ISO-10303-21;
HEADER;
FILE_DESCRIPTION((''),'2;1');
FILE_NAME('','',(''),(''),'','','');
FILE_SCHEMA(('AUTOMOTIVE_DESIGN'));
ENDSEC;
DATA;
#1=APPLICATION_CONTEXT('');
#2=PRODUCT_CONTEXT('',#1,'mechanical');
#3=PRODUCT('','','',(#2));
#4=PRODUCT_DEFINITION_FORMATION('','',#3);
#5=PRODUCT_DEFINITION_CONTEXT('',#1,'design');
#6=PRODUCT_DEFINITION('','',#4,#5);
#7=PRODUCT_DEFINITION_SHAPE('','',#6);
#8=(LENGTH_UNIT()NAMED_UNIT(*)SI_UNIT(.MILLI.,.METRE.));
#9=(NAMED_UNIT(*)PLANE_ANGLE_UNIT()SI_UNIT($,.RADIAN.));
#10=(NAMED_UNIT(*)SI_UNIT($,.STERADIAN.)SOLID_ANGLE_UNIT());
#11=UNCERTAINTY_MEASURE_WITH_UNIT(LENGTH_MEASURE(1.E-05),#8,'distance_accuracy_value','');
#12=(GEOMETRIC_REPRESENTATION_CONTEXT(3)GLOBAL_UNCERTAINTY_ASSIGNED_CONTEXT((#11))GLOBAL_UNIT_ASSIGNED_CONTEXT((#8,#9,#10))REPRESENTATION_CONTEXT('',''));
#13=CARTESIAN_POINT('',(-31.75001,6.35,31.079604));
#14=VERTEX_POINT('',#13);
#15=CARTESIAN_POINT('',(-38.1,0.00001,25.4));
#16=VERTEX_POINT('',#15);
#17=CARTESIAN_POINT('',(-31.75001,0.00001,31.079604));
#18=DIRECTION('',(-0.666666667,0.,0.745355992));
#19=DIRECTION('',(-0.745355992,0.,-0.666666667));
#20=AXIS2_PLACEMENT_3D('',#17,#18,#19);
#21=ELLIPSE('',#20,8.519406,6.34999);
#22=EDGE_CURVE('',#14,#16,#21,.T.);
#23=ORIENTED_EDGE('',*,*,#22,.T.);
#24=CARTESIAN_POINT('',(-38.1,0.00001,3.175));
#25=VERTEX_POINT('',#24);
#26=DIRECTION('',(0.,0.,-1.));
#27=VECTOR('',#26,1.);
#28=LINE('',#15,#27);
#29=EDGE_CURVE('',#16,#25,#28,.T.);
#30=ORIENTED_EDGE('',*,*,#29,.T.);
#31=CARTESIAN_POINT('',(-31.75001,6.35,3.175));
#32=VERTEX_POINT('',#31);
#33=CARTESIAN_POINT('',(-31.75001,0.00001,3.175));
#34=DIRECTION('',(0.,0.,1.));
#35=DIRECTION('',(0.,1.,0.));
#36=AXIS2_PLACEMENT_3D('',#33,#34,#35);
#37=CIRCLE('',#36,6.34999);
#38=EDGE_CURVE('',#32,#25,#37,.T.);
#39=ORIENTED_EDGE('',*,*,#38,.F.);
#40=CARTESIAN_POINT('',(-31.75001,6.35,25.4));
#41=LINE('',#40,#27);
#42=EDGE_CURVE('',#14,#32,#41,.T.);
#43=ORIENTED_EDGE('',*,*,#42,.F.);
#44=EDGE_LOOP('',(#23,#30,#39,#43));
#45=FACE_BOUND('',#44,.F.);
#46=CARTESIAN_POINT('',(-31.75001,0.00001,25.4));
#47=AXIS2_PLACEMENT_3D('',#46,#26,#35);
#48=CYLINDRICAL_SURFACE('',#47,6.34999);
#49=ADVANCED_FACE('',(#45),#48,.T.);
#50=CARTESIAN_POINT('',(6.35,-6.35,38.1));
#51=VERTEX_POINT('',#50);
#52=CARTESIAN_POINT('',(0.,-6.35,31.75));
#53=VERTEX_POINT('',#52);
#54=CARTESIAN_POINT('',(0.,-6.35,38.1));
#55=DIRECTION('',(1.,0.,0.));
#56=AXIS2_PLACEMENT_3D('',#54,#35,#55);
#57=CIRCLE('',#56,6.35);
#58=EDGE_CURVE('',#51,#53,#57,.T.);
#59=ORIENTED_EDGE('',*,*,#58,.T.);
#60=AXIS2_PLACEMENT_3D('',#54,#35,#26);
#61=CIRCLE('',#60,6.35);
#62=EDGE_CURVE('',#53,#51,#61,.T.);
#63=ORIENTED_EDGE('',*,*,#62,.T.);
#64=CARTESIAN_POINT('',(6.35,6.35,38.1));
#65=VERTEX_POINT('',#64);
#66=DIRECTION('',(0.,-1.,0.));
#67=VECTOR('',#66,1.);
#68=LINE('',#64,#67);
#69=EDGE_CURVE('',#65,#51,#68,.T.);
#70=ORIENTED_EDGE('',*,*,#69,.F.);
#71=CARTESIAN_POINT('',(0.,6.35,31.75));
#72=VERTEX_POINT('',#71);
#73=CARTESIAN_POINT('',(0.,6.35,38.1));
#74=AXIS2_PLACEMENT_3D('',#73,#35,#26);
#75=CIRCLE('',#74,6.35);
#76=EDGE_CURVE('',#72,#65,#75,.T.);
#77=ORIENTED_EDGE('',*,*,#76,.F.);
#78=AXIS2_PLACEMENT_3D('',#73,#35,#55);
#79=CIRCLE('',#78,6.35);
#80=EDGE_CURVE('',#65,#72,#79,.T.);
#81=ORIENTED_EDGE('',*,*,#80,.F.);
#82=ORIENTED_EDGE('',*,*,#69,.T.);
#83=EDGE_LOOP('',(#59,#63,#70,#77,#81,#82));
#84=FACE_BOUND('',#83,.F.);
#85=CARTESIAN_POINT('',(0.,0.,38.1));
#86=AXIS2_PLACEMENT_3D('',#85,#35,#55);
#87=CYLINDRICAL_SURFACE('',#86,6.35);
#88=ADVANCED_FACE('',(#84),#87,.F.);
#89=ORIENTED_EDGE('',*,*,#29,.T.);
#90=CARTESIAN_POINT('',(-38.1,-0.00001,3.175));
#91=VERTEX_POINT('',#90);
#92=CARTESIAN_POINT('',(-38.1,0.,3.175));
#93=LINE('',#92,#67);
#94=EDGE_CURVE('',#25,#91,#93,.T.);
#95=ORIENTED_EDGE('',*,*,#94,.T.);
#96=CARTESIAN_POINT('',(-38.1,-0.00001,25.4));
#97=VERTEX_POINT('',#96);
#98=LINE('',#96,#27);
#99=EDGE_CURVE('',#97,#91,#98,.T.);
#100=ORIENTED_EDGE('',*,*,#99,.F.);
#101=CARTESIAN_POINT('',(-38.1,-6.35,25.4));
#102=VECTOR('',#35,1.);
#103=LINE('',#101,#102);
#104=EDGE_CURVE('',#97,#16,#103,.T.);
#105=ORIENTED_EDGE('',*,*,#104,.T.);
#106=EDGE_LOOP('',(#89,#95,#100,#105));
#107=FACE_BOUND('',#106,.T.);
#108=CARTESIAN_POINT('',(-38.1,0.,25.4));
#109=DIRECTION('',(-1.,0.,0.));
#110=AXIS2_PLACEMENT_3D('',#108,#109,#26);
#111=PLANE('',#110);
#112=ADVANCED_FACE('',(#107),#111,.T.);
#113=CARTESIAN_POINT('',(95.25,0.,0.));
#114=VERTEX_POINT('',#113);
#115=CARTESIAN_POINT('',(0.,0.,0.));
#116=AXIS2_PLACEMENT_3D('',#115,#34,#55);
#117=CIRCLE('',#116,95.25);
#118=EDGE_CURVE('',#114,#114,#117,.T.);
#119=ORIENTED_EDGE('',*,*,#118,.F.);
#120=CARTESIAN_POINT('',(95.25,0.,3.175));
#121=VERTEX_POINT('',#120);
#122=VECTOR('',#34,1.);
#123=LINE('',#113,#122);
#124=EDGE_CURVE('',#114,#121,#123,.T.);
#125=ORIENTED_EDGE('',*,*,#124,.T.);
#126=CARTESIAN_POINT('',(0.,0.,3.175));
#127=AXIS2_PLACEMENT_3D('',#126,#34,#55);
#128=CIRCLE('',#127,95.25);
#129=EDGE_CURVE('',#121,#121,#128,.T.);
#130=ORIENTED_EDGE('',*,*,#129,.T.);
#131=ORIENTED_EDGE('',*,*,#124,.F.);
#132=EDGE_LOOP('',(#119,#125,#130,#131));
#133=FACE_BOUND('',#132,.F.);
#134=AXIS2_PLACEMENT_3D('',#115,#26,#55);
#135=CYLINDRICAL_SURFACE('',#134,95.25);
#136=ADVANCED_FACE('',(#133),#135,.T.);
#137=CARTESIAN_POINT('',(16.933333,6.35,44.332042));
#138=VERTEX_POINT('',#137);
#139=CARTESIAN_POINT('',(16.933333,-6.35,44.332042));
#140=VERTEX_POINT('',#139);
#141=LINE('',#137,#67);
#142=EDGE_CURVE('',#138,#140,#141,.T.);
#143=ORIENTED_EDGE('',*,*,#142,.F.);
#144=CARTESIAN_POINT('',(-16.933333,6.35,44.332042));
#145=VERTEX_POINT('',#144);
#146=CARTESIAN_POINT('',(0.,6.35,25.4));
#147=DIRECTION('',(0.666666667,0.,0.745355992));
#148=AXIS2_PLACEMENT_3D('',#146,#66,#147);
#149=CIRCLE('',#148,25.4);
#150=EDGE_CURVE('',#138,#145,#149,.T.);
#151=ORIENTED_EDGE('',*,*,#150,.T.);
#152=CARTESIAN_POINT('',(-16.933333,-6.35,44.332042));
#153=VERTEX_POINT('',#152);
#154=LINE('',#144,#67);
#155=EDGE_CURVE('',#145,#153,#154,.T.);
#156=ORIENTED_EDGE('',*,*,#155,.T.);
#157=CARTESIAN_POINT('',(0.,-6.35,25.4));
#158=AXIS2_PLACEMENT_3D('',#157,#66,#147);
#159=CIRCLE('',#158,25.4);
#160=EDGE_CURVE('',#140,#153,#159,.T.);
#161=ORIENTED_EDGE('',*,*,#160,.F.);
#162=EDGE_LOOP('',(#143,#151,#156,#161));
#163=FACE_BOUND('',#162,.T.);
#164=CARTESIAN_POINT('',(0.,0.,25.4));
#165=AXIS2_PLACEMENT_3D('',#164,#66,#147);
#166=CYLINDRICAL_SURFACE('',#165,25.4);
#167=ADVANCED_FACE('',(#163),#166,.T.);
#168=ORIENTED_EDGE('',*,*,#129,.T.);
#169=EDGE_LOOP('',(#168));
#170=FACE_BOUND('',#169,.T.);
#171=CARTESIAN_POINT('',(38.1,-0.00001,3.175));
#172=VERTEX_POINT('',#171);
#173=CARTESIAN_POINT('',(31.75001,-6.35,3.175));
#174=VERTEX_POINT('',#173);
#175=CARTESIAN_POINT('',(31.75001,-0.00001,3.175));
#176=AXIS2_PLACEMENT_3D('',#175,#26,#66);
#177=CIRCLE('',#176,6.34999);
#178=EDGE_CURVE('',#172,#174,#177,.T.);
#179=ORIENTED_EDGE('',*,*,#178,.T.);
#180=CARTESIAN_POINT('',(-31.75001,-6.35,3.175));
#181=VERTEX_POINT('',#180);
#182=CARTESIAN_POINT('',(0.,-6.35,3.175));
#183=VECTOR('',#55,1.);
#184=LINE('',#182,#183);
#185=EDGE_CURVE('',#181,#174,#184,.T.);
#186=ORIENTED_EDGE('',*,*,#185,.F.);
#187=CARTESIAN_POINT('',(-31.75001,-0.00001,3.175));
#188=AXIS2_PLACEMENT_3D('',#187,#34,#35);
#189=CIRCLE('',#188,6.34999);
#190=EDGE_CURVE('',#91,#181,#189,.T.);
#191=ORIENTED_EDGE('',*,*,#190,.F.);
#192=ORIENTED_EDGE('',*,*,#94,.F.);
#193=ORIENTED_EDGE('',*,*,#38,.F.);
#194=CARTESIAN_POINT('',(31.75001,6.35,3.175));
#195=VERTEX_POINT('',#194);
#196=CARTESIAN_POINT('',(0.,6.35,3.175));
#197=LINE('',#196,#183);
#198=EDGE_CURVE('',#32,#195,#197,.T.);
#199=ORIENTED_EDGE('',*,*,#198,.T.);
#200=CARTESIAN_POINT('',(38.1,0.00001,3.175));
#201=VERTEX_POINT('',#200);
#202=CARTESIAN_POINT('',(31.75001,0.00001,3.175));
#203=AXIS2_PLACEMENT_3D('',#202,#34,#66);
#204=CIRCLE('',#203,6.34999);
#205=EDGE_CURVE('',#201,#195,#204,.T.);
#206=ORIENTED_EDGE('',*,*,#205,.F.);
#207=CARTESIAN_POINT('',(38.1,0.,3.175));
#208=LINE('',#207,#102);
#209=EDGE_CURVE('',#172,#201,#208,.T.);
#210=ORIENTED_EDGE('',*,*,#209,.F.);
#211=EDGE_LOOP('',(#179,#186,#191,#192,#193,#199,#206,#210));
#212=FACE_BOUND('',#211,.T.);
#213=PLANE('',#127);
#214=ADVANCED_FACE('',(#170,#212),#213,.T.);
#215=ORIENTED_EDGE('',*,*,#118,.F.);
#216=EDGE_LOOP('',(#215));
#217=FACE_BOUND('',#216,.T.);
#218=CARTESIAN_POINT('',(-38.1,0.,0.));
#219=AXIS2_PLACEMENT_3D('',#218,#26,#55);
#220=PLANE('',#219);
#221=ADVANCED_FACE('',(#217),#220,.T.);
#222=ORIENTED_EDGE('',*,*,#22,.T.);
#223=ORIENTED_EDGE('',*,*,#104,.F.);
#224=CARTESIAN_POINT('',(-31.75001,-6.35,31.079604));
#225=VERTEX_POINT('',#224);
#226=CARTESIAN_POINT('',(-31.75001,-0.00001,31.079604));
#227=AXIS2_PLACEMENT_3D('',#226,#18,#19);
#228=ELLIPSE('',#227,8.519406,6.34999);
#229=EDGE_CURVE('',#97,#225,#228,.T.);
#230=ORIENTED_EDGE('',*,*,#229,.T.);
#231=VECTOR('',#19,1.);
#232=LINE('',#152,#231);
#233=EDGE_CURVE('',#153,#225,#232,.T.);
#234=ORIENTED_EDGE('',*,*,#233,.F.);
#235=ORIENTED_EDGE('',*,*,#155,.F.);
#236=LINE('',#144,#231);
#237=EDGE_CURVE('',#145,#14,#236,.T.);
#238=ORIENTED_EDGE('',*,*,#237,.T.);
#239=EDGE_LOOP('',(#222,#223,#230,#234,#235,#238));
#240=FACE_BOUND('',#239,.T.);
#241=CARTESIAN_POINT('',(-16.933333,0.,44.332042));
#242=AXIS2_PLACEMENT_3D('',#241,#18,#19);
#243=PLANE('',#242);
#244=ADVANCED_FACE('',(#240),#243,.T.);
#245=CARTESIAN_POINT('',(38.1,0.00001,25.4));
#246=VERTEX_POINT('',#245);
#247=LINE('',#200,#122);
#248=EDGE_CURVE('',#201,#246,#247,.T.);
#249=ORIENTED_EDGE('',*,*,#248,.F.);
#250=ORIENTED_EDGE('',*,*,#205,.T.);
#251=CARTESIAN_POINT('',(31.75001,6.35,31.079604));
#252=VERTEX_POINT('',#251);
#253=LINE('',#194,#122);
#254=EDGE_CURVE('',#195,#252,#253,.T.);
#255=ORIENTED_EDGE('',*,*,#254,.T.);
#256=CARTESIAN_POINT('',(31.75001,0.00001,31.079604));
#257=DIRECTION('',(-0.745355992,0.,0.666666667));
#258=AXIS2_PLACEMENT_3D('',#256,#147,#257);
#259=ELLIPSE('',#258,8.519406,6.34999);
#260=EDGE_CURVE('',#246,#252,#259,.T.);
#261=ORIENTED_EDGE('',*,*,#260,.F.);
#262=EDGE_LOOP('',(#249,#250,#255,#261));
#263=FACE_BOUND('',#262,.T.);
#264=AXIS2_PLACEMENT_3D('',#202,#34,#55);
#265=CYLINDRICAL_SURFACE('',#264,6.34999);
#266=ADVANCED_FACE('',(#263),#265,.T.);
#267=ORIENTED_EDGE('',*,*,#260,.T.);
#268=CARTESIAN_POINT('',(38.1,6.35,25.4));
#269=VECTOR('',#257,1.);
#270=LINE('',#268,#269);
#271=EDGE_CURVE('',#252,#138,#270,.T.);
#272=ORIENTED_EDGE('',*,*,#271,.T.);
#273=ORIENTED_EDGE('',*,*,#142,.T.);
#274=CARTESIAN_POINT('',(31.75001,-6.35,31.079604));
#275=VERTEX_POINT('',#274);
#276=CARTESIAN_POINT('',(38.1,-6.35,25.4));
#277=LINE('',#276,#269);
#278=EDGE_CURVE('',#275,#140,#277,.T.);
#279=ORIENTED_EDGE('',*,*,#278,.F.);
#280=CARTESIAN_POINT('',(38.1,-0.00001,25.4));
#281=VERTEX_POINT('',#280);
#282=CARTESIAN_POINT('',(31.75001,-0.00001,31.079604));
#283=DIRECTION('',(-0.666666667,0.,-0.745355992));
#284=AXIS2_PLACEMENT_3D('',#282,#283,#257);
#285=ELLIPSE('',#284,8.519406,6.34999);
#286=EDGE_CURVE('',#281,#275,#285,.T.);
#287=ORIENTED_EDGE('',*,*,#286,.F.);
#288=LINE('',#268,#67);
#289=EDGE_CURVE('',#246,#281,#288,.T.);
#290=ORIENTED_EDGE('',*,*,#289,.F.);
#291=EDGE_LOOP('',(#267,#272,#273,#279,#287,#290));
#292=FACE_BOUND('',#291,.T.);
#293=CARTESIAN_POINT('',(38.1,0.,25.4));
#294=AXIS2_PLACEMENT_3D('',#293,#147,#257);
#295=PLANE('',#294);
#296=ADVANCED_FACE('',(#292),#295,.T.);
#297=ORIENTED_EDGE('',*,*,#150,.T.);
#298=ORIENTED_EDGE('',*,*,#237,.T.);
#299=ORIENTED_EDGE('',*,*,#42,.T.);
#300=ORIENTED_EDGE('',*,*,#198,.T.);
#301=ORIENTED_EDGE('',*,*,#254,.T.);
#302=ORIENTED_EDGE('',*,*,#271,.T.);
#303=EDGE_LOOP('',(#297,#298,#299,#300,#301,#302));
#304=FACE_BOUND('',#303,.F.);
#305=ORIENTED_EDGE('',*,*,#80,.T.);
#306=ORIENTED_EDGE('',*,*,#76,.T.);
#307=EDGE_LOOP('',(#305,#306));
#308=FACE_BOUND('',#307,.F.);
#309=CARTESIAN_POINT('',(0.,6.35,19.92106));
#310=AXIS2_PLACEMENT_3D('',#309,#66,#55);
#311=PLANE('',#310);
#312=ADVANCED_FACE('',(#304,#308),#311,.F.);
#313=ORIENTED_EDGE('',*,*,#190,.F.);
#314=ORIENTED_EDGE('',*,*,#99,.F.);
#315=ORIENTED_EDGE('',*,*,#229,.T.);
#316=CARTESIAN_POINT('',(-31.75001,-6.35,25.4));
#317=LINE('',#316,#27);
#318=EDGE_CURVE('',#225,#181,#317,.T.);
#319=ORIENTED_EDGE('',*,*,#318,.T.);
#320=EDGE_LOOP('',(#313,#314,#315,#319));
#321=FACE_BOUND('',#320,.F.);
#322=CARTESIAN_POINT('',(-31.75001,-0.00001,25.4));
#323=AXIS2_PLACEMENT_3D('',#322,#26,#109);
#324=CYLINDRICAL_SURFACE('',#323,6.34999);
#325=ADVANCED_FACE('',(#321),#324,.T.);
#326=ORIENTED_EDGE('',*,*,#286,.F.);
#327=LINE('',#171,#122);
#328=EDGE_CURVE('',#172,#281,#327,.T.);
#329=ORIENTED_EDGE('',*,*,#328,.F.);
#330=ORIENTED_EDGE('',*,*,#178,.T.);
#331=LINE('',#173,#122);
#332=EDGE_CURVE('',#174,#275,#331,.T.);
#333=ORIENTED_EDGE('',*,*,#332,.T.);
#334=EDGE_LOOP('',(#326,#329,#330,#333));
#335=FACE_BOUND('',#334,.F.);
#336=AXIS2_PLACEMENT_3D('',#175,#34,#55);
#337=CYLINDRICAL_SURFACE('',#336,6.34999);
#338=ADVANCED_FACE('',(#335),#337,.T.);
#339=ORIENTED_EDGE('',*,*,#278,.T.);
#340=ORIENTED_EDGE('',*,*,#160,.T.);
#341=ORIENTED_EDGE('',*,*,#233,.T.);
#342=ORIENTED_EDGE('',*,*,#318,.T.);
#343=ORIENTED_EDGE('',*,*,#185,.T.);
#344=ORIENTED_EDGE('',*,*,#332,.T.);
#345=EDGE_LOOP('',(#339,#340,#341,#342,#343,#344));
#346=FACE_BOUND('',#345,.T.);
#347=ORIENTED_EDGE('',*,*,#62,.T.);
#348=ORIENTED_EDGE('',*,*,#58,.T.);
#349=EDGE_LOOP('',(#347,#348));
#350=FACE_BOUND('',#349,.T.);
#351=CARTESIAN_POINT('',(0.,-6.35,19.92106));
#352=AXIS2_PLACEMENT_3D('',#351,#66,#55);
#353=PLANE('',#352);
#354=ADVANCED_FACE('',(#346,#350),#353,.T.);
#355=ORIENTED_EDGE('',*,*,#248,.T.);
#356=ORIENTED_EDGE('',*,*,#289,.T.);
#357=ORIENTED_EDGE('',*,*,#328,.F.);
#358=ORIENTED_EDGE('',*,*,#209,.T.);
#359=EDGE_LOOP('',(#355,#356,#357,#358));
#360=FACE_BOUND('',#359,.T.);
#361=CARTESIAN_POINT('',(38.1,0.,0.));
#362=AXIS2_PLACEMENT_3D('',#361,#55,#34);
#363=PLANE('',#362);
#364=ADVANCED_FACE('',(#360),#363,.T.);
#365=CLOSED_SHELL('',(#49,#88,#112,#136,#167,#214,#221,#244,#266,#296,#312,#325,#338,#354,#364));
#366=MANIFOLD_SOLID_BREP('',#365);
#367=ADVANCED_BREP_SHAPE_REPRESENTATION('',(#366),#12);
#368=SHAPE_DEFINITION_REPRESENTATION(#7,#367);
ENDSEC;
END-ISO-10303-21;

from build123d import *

# Parameters (mm, degrees)
F0_R     = 95.25
F1_DEPTH = 3.175
F3_DEPTH = 6.35
F4_R     = 6.34999


# Not quite as in the source:
# - a fillet or chamfer is up to 0.001 mm smaller than in the source, because OpenCascade refuses the exact size


with BuildPart() as f1:
    # F0 (on Top) → F1 (new body)
    with BuildSketch(Plane.XY):
        Circle(F0_R)
    extrude(amount=F1_DEPTH)

    # F2 (on Front) → F3 (join, symmetric)
    with BuildSketch(Plane.XZ):
        with BuildLine():
            Line((38.1, 0), (38.1, 25.4))
            Line((38.1, 25.4), (16.9333333333, 44.3320422095))
            ThreePointArc((16.9333333333, 44.3320422095), (0, 50.8), (-16.9333333333, 44.3320422095))
            Line((-16.9333333333, 44.3320422095), (-38.1, 25.4))
            Line((-38.1, 25.4), (-38.1, 0))
            Line((-38.1, 0), (0, 0))
            Line((0, 0), (38.1, 0))
        make_face()
        with BuildLine():
            ThreePointArc((6.35, 38.1), (4.4901280605, 33.6098719395), (0, 31.75))
            ThreePointArc((0, 31.75), (-4.4901280605, 42.5901280605), (6.35, 38.1))
        make_face(mode=Mode.SUBTRACT)
    extrude(amount=F3_DEPTH, both=True)

    # F4 (radius 6.35 in the source; OpenCascade refuses exactly that, so slightly less here)
    f4_edges = [f1.edges().sort_by_distance(p)[0] for p in [
        (-38.1, -6.35, 14.2875),
        (-38.1, 6.35, 14.2875),
        (38.1, -6.35, 14.2875),
        (38.1, 6.35, 14.2875),
    ]]
    fillet(f4_edges, radius=F4_R)


solid = f1.part
